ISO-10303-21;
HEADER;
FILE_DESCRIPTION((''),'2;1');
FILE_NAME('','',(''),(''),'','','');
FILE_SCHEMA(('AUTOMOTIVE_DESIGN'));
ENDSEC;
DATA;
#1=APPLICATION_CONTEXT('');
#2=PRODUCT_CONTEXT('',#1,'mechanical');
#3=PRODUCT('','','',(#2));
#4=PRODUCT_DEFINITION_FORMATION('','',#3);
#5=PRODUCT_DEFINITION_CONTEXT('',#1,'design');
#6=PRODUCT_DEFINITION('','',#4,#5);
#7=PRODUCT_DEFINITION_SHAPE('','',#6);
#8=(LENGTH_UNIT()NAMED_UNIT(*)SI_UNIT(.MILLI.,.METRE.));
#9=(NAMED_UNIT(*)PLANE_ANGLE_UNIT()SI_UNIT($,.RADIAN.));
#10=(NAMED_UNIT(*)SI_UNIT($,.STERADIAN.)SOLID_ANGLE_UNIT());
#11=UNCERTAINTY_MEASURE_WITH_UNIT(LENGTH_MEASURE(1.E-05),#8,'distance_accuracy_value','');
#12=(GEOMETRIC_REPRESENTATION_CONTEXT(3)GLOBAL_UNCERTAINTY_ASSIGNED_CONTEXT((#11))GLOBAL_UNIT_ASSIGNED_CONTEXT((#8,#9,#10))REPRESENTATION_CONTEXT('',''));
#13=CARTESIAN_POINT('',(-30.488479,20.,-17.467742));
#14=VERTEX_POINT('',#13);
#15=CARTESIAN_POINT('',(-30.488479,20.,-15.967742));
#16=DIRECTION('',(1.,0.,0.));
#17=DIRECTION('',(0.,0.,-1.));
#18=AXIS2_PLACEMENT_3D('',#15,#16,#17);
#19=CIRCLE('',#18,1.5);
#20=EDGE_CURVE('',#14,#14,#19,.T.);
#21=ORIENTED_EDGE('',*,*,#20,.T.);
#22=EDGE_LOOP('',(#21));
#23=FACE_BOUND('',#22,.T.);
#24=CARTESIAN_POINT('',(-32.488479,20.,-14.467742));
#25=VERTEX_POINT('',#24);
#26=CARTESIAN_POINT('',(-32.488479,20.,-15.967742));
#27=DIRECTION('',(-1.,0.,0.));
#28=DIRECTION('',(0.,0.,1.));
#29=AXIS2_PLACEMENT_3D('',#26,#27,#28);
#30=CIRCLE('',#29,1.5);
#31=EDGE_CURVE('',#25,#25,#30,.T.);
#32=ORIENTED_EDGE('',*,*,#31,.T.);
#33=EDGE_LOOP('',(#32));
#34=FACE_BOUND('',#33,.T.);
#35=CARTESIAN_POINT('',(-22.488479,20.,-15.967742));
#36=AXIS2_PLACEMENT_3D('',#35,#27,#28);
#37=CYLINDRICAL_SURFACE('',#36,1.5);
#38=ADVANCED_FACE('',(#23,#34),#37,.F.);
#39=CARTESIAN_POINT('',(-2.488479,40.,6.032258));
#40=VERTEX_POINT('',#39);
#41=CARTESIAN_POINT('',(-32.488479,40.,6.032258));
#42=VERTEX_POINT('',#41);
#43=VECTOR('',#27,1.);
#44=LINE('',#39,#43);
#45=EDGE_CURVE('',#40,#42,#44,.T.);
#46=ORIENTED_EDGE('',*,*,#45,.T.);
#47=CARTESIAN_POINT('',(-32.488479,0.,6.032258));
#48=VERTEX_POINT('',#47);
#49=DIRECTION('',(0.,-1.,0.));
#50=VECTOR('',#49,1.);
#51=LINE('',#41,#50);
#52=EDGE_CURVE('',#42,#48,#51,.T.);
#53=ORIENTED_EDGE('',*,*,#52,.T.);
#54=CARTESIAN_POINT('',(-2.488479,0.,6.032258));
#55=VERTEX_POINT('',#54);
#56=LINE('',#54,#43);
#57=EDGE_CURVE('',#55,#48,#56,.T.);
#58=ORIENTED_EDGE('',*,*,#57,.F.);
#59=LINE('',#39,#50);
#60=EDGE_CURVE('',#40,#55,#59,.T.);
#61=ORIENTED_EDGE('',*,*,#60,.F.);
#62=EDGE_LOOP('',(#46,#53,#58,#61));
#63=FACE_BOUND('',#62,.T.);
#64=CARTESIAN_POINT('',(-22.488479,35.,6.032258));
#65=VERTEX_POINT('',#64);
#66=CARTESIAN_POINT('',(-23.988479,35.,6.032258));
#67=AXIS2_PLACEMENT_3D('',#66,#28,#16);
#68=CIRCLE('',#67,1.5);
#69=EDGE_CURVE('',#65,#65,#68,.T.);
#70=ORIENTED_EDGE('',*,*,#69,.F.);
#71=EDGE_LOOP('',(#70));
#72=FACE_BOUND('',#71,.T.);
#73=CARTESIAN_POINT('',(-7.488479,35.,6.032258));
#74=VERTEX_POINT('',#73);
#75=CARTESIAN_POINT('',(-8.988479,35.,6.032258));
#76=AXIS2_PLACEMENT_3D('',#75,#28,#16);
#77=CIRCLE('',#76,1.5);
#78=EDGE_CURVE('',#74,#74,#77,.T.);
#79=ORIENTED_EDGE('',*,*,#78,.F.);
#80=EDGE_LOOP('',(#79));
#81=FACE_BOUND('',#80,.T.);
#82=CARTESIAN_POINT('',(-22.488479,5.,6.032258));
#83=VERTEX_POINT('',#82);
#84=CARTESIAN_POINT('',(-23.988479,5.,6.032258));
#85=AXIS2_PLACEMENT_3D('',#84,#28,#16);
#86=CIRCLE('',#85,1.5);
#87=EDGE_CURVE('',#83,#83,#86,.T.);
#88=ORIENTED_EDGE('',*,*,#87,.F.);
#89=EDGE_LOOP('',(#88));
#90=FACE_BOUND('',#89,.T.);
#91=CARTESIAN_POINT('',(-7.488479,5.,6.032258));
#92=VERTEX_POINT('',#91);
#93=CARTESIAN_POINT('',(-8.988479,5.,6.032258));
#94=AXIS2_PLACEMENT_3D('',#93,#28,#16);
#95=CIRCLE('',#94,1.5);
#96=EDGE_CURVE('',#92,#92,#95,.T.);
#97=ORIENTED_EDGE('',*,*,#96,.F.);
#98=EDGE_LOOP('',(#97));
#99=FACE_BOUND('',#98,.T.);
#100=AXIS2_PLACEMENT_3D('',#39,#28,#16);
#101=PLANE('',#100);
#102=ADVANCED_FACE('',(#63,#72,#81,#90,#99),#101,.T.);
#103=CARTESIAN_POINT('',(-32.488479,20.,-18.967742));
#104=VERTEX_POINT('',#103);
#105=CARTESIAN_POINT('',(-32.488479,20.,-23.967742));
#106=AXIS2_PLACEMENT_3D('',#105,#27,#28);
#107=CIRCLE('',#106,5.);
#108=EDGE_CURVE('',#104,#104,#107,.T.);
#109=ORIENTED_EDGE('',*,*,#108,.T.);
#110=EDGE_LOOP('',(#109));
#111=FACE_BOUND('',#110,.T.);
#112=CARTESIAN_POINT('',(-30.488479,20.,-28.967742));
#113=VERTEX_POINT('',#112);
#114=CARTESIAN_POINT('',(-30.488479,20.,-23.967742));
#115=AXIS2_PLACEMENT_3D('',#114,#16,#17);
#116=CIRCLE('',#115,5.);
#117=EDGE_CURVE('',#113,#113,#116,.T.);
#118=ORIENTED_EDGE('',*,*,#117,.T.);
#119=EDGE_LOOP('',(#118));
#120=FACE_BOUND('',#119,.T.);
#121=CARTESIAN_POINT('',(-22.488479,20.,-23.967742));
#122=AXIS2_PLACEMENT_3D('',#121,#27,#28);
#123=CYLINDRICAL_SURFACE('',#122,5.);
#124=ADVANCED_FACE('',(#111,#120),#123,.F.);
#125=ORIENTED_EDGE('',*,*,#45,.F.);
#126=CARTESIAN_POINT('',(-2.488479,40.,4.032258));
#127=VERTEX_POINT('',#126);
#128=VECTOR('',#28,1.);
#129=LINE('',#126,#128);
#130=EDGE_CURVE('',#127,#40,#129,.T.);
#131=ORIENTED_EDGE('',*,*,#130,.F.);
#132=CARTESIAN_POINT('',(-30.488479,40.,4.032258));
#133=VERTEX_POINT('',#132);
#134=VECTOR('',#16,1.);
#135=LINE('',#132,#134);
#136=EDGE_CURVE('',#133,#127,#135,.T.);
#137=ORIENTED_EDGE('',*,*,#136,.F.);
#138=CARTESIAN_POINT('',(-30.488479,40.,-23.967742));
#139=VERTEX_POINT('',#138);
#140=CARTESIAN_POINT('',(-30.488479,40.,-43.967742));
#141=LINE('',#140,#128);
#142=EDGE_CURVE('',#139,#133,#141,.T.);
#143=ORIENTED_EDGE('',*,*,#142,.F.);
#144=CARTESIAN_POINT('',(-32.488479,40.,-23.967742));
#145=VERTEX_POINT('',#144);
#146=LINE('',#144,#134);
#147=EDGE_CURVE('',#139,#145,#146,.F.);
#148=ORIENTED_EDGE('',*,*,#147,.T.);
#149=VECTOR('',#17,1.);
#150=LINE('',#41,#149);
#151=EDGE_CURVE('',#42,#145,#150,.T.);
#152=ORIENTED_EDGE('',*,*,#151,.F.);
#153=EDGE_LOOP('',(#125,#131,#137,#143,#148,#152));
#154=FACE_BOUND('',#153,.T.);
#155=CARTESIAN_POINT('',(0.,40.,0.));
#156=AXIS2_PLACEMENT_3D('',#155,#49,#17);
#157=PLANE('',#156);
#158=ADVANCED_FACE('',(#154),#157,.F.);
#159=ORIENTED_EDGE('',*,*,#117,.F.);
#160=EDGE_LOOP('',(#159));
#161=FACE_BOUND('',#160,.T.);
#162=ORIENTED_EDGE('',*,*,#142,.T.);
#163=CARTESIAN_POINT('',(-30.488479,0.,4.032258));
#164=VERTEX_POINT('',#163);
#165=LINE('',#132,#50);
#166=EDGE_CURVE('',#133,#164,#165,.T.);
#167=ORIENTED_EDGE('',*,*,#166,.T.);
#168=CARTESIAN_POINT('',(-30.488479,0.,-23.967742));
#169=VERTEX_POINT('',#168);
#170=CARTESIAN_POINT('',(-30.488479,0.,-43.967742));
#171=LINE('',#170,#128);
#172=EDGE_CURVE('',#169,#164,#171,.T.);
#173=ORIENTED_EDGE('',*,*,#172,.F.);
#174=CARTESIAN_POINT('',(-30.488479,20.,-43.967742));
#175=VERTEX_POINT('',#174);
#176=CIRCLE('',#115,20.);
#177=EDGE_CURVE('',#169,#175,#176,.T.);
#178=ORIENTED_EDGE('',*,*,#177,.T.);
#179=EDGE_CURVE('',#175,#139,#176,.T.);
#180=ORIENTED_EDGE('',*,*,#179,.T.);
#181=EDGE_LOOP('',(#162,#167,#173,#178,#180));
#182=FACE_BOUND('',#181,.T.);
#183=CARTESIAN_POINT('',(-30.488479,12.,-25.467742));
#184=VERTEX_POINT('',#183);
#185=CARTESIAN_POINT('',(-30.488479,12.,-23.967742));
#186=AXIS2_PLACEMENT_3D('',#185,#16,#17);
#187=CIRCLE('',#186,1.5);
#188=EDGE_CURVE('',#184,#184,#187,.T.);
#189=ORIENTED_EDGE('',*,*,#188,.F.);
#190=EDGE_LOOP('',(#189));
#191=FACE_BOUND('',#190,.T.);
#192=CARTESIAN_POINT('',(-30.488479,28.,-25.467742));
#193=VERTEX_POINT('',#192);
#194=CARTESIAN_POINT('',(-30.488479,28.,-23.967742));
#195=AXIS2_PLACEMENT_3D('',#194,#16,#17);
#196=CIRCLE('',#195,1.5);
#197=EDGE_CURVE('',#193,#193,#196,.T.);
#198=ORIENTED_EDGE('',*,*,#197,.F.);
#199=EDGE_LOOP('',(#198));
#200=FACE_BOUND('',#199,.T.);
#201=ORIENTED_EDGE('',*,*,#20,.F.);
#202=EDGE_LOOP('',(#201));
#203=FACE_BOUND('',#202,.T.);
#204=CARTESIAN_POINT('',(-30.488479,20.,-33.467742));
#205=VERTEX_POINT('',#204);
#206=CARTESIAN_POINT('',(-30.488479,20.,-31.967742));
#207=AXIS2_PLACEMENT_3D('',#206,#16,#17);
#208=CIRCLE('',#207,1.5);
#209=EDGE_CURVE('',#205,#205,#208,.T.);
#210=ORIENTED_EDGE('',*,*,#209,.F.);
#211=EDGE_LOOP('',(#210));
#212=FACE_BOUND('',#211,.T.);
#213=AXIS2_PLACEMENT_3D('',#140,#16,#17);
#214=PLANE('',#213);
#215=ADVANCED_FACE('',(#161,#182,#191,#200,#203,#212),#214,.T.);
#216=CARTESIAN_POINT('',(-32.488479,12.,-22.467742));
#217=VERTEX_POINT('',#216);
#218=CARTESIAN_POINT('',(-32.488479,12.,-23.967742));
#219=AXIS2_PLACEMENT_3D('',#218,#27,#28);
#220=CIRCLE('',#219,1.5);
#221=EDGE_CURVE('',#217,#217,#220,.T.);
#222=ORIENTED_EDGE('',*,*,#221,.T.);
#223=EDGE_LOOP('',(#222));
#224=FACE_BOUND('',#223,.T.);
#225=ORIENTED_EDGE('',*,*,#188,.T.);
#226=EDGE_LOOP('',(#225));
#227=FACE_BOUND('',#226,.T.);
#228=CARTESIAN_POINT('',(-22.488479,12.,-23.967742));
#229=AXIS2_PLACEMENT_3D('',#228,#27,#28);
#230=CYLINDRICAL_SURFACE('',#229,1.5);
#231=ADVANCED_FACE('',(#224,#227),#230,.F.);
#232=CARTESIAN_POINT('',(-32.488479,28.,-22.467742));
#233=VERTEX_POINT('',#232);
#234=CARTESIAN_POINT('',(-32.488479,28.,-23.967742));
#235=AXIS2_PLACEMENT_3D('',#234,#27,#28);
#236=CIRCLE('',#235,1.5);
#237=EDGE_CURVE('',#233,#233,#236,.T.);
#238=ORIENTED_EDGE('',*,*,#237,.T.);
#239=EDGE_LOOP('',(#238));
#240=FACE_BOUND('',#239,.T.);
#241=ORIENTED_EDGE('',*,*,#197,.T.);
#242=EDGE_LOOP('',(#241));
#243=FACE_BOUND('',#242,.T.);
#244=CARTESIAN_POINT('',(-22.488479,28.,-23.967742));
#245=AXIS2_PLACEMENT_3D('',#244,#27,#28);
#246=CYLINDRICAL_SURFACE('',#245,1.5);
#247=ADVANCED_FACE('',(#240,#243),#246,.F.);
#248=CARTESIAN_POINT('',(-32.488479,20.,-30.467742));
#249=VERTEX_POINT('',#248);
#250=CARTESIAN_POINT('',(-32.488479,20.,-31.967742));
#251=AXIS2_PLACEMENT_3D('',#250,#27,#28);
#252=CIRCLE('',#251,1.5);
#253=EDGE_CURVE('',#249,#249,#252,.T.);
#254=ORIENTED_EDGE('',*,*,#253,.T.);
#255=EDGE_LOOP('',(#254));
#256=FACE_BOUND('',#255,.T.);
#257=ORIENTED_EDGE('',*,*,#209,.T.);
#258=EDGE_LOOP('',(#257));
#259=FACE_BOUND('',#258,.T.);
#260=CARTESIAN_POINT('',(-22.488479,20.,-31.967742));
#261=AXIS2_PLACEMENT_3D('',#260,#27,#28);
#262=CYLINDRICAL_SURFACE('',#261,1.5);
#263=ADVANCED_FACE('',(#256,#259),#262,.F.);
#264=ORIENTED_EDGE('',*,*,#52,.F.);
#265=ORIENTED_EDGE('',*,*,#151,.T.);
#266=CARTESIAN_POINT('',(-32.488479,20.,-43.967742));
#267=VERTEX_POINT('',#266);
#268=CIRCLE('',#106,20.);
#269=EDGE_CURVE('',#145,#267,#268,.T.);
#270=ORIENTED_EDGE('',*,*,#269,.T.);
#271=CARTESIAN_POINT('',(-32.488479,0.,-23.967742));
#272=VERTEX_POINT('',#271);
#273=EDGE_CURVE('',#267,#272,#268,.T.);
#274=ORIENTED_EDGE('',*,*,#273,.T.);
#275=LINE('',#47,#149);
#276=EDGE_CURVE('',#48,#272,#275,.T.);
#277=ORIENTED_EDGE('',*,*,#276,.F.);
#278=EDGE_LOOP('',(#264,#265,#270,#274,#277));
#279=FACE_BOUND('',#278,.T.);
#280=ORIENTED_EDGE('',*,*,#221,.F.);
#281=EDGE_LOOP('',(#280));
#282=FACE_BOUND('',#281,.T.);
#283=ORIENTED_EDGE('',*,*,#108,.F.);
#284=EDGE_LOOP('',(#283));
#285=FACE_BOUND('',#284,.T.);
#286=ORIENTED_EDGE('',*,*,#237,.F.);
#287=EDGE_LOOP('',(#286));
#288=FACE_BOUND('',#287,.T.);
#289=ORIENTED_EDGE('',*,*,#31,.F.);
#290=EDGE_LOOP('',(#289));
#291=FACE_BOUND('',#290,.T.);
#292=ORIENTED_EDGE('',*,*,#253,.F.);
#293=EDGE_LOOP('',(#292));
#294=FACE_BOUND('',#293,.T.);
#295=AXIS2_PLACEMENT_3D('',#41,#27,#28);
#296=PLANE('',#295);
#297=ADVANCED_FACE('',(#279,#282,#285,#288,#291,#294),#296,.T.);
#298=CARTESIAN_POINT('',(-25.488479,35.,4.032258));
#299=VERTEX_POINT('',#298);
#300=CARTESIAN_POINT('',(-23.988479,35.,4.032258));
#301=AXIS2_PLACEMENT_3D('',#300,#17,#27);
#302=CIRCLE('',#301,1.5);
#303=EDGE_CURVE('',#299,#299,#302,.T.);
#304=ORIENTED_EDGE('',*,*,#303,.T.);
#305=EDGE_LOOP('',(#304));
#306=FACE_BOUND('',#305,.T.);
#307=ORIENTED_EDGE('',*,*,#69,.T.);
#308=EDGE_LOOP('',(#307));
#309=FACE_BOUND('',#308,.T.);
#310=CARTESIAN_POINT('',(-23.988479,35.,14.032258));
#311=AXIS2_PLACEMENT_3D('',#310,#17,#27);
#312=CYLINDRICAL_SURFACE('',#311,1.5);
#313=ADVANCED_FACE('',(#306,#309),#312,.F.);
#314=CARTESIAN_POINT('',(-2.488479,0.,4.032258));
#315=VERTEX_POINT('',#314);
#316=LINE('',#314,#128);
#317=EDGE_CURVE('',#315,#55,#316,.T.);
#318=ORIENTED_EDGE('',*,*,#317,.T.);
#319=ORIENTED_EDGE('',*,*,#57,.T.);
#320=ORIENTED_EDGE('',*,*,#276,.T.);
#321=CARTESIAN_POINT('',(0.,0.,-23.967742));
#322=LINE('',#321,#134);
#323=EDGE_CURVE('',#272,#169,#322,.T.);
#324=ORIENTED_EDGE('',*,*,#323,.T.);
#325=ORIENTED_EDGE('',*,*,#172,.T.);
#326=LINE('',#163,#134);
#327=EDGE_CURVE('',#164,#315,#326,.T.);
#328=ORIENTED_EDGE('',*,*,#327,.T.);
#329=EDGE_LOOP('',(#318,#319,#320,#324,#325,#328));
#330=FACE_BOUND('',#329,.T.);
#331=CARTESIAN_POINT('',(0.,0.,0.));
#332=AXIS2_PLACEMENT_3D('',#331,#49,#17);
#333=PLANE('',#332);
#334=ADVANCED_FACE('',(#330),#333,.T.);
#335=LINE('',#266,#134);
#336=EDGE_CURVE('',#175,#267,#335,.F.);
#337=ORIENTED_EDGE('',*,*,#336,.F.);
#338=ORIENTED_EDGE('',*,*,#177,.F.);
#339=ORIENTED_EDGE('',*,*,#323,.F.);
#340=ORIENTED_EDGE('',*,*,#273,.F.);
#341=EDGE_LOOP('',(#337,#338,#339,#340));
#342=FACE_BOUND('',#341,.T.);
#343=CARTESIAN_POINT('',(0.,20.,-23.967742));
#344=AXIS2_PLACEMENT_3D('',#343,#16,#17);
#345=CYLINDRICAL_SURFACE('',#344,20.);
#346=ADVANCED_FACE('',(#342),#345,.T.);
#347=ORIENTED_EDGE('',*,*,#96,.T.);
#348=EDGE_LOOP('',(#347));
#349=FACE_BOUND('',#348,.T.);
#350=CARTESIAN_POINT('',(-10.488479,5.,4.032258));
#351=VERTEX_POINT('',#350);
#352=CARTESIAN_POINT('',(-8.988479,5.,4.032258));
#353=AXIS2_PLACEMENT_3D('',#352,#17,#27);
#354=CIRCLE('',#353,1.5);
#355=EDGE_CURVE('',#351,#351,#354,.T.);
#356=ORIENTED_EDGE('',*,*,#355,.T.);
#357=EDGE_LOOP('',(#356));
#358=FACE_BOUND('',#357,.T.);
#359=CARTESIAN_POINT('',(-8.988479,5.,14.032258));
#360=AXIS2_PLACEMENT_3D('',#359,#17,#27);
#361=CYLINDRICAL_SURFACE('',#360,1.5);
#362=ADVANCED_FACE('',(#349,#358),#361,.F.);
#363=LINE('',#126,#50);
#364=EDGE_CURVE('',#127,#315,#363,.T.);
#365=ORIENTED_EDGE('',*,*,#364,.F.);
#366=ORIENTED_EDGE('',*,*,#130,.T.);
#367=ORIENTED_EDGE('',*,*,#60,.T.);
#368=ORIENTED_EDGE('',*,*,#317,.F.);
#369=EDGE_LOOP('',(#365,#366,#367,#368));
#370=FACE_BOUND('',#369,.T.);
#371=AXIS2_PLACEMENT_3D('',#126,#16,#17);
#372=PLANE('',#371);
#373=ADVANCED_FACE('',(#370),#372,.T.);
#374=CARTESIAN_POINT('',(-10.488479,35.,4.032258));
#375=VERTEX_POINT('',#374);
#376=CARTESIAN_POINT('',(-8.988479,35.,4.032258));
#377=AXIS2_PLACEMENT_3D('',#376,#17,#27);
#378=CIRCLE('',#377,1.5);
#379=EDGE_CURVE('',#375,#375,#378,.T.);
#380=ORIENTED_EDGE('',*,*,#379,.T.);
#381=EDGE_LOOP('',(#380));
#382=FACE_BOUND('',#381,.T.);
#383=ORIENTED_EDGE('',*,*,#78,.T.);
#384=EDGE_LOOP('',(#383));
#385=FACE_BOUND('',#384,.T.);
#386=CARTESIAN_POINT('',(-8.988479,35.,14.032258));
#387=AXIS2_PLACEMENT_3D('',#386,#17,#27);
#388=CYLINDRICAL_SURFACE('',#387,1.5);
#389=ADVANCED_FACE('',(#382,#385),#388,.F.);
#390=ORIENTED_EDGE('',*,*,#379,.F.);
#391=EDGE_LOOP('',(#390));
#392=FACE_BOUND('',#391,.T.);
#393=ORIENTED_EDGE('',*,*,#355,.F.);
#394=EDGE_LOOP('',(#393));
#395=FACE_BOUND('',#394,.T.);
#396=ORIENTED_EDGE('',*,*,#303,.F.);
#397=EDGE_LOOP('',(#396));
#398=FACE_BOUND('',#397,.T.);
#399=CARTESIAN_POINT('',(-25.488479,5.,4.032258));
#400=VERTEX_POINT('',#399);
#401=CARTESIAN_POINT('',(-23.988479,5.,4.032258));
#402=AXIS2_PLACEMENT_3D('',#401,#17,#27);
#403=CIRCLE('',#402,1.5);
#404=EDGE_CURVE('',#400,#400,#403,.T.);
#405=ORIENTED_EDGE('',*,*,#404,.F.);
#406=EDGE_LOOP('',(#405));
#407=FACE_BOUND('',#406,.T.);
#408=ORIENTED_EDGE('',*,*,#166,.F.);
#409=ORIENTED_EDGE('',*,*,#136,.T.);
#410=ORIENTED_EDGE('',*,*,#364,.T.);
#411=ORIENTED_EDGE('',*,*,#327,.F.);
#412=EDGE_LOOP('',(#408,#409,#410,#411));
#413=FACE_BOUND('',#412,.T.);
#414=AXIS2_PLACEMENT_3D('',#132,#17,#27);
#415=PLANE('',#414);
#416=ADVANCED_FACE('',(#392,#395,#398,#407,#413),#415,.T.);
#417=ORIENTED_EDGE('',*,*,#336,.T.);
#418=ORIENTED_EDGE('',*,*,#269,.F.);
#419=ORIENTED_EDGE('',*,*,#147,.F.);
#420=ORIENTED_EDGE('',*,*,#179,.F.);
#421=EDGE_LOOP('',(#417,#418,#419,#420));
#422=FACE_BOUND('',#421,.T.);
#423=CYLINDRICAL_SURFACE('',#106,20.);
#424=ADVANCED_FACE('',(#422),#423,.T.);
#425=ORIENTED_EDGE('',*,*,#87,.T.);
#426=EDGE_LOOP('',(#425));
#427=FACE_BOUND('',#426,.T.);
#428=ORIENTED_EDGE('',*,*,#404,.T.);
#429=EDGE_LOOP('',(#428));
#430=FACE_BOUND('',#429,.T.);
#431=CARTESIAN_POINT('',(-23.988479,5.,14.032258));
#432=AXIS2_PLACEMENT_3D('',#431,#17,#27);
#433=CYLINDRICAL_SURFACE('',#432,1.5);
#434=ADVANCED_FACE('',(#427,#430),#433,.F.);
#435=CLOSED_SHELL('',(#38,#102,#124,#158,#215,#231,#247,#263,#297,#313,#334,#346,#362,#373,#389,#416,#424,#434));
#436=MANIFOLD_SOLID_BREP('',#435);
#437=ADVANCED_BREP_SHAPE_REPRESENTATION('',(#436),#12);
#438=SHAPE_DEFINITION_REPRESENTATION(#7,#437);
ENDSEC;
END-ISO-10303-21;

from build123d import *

# Parameters (mm, degrees)
EXTRUDE_1_DEPTH     = 40
FILLET_1_R          = 20
SKETCH_3_R          = 5
CUT_EXTRUDE_1_DEPTH = 10
SKETCH_15_R         = 1.5
CUT_EXTRUDE_2_DEPTH = 10
SKETCH_18_R         = 1.5
CUT_EXTRUDE_5_DEPTH = 10


with BuildPart() as part:
    # 草图1 → 凸台-拉伸1 (new body)
    with BuildSketch(Plane(origin=(0, 0, 0), x_dir=(1, 0, 0), z_dir=(0, 1, 0))):
        Polygon((-2.488479263, -6.032258065), (-32.488479263, -6.032258065), (-32.488479263, 43.967741935), (-30.488479263, 43.967741935), (-30.488479263, -4.032258065), (-2.488479263, -4.032258065), align=None)
    extrude(amount=EXTRUDE_1_DEPTH)

    # 圆角1
    fillet_1_edges = [part.edges().sort_by_distance(p)[0] for p in [
        (-31.488479263, 40, -43.967741935),
        (-31.488479263, 0, -43.967741935),
    ]]
    fillet(fillet_1_edges, radius=FILLET_1_R - 0.0001)  # a hair under: the kernel refuses the full size

    # 草图3 → 切除-拉伸1 (cut)
    with BuildSketch(Plane.ZY.offset(32.488479263)):
        with Locations((-23.967741935, 20)):
            Circle(SKETCH_3_R)
    extrude(amount=-CUT_EXTRUDE_1_DEPTH, mode=Mode.SUBTRACT)

    # 草图15 → 切除-拉伸2 (cut)
    with BuildSketch(Plane(origin=(-32.488479263, 20.448882386, -1043.967741935), x_dir=(0, 0, 1), z_dir=(-1, 0, 0))):
        with Locations((1012, -0.448882386)):
            Circle(SKETCH_15_R)
        with Locations((1020, 7.551117614)):
            Circle(SKETCH_15_R)
        with Locations((1028, -0.448882386)):
            Circle(SKETCH_15_R)
        with Locations((1020, -8.448882386)):
            Circle(SKETCH_15_R)
    extrude(amount=-CUT_EXTRUDE_2_DEPTH, mode=Mode.SUBTRACT)

    # 草图18 → 切除-拉伸5 (cut)
    with BuildSketch(Plane(origin=(0, 0, 4.032258065), x_dir=(-1, 0, 0), z_dir=(0, 0, -1))):
        with Locations((8.988479263, 35)):
            Circle(SKETCH_18_R)
        with Locations((23.988479263, 35)):
            Circle(SKETCH_18_R)
        with Locations((23.988479263, 5)):
            Circle(SKETCH_18_R)
        with Locations((8.988479263, 5)):
            Circle(SKETCH_18_R)
    extrude(amount=-CUT_EXTRUDE_5_DEPTH, mode=Mode.SUBTRACT)


solid = part.part
